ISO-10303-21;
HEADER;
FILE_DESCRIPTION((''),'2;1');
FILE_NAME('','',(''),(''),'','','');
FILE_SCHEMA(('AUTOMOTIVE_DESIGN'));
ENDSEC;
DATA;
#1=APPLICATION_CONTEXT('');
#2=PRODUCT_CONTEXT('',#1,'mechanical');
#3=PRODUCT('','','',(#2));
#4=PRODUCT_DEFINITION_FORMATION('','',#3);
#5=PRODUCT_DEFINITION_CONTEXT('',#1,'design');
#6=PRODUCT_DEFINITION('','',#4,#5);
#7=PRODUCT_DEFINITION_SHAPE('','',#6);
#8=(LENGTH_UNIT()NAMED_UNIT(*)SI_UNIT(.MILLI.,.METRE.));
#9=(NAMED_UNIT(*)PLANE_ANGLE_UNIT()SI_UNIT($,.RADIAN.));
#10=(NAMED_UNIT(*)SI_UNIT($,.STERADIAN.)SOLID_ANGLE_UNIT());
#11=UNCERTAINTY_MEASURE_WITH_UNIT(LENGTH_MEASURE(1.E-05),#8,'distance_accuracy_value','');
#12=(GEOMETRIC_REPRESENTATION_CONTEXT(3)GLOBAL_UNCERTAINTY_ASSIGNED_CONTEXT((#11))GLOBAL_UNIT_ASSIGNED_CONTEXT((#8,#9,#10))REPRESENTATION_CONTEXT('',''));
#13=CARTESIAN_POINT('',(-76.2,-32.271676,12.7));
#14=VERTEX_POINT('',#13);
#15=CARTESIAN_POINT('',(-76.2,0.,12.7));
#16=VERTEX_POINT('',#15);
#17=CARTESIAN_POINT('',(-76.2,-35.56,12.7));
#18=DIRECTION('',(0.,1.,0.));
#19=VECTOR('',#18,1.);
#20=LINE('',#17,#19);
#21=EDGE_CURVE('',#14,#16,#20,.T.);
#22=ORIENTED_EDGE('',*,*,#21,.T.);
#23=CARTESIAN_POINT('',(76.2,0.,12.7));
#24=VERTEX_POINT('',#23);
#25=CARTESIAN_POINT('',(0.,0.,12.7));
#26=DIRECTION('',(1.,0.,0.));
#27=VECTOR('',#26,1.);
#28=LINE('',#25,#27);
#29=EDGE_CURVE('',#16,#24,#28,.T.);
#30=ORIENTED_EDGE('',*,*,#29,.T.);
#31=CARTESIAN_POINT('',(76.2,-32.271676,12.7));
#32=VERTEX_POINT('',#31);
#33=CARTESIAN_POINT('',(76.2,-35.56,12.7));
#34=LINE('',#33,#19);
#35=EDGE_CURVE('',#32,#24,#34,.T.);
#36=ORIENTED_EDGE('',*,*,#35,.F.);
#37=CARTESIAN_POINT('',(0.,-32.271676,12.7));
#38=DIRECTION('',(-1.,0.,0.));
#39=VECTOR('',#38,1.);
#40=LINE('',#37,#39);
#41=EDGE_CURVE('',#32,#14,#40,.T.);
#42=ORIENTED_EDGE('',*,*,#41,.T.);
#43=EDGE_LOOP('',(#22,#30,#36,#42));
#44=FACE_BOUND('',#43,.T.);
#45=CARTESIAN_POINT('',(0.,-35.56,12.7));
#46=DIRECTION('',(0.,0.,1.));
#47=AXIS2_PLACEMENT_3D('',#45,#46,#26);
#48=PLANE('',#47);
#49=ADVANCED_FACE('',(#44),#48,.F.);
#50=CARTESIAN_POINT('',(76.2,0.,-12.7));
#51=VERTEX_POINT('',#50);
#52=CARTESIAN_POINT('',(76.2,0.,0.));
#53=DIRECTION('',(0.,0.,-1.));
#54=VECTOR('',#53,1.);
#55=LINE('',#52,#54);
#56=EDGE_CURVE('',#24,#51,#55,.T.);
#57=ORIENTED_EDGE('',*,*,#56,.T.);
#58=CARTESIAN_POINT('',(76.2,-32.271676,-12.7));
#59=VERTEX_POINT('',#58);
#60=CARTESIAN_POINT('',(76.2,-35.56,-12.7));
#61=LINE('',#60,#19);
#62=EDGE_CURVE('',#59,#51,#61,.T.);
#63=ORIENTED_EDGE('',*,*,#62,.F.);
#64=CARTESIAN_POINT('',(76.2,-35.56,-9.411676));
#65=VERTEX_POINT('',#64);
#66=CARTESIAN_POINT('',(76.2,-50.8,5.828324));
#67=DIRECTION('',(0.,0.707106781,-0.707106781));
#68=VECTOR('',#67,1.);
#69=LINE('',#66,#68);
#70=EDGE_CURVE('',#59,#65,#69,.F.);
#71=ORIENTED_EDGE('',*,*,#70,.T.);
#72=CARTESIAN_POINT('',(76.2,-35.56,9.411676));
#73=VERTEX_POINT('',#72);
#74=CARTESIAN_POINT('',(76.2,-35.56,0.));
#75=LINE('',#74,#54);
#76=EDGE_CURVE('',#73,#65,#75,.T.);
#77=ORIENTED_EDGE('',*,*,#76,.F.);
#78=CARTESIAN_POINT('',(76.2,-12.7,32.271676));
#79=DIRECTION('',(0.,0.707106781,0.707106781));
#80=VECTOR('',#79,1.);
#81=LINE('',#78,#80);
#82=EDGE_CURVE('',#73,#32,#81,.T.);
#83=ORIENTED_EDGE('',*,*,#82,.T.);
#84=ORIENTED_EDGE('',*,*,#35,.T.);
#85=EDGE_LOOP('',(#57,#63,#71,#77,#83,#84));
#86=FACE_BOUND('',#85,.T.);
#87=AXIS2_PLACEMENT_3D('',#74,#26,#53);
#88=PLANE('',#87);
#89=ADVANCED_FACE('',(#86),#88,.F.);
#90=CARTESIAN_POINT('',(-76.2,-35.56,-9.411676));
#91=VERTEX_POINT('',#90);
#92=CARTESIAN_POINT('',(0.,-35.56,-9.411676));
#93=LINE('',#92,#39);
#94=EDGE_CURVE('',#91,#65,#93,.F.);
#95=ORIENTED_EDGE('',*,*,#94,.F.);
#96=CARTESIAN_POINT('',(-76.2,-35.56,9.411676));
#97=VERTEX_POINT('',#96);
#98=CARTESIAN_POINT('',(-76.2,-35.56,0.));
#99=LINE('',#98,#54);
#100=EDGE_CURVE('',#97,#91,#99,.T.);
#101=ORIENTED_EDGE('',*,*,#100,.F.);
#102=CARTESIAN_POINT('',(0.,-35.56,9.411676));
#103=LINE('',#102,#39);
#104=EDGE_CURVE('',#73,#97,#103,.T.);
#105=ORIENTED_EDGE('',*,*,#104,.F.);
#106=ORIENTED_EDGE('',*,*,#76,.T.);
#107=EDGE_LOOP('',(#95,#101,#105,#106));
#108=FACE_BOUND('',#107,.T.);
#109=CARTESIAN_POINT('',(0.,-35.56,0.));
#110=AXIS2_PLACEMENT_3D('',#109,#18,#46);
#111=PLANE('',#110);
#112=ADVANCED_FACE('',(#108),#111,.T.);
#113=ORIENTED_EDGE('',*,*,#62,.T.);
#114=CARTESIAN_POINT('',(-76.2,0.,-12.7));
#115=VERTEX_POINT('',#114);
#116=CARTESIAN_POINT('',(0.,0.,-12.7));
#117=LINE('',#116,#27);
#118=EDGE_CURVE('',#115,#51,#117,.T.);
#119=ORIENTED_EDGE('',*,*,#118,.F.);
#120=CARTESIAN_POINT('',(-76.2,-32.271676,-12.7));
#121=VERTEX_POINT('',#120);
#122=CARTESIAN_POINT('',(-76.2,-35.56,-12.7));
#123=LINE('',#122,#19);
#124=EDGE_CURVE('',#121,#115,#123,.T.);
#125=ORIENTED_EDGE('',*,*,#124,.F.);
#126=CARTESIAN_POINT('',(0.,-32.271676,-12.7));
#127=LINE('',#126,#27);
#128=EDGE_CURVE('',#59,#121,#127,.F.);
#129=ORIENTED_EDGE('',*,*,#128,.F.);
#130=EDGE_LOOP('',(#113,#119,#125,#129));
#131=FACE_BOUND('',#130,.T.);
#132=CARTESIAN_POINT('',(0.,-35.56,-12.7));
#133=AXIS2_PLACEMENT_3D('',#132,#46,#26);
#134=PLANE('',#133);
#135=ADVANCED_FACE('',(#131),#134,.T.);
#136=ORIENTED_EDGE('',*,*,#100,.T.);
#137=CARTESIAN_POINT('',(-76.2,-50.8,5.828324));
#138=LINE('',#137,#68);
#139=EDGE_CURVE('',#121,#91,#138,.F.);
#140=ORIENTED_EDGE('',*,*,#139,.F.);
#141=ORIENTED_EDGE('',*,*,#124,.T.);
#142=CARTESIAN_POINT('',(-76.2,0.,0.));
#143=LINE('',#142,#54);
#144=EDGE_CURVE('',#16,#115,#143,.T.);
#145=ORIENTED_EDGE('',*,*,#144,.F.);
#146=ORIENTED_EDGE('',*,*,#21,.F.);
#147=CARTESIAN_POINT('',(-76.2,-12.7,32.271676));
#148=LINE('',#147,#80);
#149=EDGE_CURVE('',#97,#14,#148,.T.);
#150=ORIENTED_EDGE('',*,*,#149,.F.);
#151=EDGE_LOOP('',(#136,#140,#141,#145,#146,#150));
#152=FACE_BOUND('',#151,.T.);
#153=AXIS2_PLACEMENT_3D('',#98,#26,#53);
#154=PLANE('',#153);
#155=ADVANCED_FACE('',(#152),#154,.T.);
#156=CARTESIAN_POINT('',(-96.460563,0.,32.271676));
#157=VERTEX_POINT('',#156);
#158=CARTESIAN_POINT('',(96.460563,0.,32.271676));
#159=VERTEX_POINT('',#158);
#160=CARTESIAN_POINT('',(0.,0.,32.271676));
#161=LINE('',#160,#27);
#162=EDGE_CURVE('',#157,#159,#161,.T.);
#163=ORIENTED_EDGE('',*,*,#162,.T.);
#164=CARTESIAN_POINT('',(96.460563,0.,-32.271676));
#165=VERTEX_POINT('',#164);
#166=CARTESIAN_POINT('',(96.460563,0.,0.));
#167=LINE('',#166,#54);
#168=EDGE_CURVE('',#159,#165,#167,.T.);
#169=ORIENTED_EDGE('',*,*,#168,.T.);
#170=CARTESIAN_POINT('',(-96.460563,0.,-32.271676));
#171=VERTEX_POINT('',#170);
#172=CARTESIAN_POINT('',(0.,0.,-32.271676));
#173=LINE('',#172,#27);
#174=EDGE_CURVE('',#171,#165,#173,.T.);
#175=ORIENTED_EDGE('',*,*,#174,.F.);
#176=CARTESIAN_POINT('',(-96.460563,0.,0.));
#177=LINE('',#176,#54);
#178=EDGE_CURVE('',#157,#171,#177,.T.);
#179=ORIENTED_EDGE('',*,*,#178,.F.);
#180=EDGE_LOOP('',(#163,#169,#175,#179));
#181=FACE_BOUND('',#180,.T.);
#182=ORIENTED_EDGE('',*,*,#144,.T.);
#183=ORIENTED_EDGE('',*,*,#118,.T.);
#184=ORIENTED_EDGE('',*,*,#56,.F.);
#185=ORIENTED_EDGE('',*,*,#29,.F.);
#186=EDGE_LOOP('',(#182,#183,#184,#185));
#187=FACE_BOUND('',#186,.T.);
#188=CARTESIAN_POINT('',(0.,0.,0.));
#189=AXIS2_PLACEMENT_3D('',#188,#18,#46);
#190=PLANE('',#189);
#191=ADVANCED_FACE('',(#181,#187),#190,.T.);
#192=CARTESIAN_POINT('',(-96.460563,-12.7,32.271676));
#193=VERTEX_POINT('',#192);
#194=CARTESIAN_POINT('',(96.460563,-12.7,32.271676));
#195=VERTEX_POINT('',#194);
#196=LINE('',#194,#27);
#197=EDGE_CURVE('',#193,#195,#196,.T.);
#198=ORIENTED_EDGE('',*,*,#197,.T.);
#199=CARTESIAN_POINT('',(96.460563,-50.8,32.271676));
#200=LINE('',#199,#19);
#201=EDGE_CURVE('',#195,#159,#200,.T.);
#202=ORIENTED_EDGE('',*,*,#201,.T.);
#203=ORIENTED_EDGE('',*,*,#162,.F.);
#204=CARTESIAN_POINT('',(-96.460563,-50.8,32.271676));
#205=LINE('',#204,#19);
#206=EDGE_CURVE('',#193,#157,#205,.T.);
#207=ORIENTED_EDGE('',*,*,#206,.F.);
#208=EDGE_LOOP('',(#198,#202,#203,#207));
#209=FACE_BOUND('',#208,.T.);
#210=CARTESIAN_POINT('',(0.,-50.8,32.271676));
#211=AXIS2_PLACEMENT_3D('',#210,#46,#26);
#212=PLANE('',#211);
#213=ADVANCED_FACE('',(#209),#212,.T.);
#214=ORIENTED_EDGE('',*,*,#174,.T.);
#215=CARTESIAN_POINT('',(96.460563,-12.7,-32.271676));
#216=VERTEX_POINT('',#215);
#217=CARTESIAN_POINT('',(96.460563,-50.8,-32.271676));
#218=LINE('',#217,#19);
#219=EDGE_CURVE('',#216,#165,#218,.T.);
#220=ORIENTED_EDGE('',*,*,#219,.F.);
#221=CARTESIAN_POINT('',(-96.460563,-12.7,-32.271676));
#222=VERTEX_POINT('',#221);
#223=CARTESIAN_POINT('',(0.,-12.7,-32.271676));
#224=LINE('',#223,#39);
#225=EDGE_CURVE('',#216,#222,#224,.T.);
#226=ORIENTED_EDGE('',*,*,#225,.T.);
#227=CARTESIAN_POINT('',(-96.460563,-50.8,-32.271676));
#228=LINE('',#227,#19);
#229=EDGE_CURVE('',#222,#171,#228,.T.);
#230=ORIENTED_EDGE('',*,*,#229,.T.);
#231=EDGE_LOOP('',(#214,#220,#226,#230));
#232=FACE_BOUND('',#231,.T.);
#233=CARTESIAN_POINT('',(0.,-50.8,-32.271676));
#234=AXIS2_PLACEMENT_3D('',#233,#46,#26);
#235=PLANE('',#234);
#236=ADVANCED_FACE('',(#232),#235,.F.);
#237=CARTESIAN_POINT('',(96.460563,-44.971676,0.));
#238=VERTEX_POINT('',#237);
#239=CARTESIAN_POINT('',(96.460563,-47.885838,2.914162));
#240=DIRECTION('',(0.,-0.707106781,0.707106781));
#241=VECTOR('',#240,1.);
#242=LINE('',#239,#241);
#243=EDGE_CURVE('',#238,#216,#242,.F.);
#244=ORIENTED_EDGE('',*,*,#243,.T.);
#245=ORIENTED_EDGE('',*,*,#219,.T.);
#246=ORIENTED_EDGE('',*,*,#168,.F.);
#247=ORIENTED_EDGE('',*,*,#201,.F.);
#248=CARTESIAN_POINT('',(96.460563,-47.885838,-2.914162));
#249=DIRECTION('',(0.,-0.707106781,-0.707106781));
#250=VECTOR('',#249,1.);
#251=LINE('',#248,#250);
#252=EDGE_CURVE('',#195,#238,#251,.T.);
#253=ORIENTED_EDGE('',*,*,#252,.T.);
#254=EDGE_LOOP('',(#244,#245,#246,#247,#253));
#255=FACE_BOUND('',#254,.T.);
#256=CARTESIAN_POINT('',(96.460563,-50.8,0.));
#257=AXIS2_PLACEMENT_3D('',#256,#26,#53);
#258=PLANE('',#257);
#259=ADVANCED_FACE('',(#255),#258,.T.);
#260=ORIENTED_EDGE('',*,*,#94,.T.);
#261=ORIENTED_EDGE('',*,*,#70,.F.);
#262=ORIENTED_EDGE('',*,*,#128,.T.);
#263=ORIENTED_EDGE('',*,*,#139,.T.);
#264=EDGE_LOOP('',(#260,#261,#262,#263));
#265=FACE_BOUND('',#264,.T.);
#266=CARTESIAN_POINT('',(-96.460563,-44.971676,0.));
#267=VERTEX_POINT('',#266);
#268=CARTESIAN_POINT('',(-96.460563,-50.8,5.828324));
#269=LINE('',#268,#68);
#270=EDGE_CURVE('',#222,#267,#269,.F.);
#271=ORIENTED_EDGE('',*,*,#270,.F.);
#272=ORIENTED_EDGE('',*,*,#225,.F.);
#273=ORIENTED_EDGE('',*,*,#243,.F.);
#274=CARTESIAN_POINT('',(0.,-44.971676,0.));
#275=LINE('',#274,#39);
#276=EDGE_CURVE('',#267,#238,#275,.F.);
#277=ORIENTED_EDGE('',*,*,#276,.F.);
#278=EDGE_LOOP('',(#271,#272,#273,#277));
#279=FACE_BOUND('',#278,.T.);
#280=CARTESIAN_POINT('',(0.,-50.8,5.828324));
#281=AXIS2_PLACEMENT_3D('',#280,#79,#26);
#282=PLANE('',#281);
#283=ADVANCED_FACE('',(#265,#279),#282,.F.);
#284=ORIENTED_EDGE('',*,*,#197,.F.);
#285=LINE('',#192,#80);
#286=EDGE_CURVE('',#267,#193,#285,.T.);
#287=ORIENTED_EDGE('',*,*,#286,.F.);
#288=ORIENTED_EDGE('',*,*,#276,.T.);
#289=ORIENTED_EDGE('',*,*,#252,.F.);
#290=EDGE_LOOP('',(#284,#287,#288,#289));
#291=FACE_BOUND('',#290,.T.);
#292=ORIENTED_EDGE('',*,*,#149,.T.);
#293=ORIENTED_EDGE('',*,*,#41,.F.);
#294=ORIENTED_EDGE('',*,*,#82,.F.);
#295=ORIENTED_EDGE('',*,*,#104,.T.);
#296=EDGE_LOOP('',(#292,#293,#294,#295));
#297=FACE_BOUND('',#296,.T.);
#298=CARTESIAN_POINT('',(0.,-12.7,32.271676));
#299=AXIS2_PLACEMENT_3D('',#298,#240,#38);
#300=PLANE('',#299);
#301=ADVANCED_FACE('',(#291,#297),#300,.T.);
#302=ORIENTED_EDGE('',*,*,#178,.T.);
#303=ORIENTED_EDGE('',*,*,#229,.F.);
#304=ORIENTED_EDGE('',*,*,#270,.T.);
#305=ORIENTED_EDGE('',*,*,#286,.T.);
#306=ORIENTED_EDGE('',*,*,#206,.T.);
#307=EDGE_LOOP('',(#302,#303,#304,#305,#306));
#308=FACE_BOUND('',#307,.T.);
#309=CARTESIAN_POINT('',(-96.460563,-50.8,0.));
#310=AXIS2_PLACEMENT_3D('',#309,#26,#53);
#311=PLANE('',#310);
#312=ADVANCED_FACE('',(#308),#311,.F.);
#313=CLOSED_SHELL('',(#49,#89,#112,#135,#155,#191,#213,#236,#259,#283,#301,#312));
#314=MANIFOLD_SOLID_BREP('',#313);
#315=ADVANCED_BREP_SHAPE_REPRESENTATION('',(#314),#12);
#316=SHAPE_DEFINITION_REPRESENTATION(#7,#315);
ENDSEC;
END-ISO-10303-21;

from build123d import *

# Parameters (mm, degrees)
SKETCH1_W           = 192.921126566
SKETCH1_H           = 64.543351392
SKETCH1_W_2         = 152.4
SKETCH1_H_2         = 25.4
BOSS_EXTRUDE4_DEPTH = 50.8
CHAMFER2_SIZE       = 38.1
SKETCH1_5_W         = 152.4
SKETCH1_5_H         = 25.4
CUT_EXTRUDE1_DEPTH  = 35.56


with BuildPart() as part:
    # Sketch1 → Boss-Extrude4 (new body)
    # profile 1 of 2: a face of its own
    with BuildSketch(Plane(origin=(0, 0, 0), x_dir=(1, 0, 0), z_dir=(0, 1, 0))):
        Rectangle(SKETCH1_W, SKETCH1_H)
        Rectangle(SKETCH1_W_2, SKETCH1_H_2, mode=Mode.SUBTRACT)
    # profile 2 of 2: a face of its own
    with BuildSketch(Plane(origin=(0, 0, 0), x_dir=(1, 0, 0), z_dir=(0, 1, 0))):
        Rectangle(SKETCH1_W_2, SKETCH1_H_2)
    extrude(amount=-BOSS_EXTRUDE4_DEPTH)

    # Chamfer2
    # the kernel refuses this chamfer: 38.1 mm, written as the material it takes off along each edge
    with BuildSketch(Plane(origin=(-194.441685124, -50.8, 32.271675696), x_dir=(0, 0.9996219169112968, 0.02749587661058638), z_dir=(1, 0, 0))) as chamfer2_piece_1:
        Polygon((CHAMFER2_SIZE * 0.999621916911, -CHAMFER2_SIZE * 0.0274958766106), (-CHAMFER2_SIZE * 0.0274958766106, -CHAMFER2_SIZE * 0.999621916911), (0, 0), align=None)
    extrude(amount=388.883370249, mode=Mode.SUBTRACT)
    with BuildSketch(Plane(origin=(194.441685124, -50.8, -32.271675696), x_dir=(0, -0.02749587661058638, 0.9996219169112968), z_dir=(-1, 0, 0))) as chamfer2_piece_2:
        Polygon((CHAMFER2_SIZE * 0.999621916911, CHAMFER2_SIZE * 0.0274958766106), (-CHAMFER2_SIZE * 0.0274958766106, CHAMFER2_SIZE * 0.999621916911), (0, 0), align=None)
    extrude(amount=388.883370249, mode=Mode.SUBTRACT)

    # Sketch1<5> → Cut-Extrude1 (cut)
    with BuildSketch(Plane(origin=(0, 0, 0), x_dir=(1, 0, 0), z_dir=(0, 1, 0))):
        Rectangle(SKETCH1_5_W, SKETCH1_5_H)
    extrude(amount=-CUT_EXTRUDE1_DEPTH, mode=Mode.SUBTRACT)


solid = part.part
